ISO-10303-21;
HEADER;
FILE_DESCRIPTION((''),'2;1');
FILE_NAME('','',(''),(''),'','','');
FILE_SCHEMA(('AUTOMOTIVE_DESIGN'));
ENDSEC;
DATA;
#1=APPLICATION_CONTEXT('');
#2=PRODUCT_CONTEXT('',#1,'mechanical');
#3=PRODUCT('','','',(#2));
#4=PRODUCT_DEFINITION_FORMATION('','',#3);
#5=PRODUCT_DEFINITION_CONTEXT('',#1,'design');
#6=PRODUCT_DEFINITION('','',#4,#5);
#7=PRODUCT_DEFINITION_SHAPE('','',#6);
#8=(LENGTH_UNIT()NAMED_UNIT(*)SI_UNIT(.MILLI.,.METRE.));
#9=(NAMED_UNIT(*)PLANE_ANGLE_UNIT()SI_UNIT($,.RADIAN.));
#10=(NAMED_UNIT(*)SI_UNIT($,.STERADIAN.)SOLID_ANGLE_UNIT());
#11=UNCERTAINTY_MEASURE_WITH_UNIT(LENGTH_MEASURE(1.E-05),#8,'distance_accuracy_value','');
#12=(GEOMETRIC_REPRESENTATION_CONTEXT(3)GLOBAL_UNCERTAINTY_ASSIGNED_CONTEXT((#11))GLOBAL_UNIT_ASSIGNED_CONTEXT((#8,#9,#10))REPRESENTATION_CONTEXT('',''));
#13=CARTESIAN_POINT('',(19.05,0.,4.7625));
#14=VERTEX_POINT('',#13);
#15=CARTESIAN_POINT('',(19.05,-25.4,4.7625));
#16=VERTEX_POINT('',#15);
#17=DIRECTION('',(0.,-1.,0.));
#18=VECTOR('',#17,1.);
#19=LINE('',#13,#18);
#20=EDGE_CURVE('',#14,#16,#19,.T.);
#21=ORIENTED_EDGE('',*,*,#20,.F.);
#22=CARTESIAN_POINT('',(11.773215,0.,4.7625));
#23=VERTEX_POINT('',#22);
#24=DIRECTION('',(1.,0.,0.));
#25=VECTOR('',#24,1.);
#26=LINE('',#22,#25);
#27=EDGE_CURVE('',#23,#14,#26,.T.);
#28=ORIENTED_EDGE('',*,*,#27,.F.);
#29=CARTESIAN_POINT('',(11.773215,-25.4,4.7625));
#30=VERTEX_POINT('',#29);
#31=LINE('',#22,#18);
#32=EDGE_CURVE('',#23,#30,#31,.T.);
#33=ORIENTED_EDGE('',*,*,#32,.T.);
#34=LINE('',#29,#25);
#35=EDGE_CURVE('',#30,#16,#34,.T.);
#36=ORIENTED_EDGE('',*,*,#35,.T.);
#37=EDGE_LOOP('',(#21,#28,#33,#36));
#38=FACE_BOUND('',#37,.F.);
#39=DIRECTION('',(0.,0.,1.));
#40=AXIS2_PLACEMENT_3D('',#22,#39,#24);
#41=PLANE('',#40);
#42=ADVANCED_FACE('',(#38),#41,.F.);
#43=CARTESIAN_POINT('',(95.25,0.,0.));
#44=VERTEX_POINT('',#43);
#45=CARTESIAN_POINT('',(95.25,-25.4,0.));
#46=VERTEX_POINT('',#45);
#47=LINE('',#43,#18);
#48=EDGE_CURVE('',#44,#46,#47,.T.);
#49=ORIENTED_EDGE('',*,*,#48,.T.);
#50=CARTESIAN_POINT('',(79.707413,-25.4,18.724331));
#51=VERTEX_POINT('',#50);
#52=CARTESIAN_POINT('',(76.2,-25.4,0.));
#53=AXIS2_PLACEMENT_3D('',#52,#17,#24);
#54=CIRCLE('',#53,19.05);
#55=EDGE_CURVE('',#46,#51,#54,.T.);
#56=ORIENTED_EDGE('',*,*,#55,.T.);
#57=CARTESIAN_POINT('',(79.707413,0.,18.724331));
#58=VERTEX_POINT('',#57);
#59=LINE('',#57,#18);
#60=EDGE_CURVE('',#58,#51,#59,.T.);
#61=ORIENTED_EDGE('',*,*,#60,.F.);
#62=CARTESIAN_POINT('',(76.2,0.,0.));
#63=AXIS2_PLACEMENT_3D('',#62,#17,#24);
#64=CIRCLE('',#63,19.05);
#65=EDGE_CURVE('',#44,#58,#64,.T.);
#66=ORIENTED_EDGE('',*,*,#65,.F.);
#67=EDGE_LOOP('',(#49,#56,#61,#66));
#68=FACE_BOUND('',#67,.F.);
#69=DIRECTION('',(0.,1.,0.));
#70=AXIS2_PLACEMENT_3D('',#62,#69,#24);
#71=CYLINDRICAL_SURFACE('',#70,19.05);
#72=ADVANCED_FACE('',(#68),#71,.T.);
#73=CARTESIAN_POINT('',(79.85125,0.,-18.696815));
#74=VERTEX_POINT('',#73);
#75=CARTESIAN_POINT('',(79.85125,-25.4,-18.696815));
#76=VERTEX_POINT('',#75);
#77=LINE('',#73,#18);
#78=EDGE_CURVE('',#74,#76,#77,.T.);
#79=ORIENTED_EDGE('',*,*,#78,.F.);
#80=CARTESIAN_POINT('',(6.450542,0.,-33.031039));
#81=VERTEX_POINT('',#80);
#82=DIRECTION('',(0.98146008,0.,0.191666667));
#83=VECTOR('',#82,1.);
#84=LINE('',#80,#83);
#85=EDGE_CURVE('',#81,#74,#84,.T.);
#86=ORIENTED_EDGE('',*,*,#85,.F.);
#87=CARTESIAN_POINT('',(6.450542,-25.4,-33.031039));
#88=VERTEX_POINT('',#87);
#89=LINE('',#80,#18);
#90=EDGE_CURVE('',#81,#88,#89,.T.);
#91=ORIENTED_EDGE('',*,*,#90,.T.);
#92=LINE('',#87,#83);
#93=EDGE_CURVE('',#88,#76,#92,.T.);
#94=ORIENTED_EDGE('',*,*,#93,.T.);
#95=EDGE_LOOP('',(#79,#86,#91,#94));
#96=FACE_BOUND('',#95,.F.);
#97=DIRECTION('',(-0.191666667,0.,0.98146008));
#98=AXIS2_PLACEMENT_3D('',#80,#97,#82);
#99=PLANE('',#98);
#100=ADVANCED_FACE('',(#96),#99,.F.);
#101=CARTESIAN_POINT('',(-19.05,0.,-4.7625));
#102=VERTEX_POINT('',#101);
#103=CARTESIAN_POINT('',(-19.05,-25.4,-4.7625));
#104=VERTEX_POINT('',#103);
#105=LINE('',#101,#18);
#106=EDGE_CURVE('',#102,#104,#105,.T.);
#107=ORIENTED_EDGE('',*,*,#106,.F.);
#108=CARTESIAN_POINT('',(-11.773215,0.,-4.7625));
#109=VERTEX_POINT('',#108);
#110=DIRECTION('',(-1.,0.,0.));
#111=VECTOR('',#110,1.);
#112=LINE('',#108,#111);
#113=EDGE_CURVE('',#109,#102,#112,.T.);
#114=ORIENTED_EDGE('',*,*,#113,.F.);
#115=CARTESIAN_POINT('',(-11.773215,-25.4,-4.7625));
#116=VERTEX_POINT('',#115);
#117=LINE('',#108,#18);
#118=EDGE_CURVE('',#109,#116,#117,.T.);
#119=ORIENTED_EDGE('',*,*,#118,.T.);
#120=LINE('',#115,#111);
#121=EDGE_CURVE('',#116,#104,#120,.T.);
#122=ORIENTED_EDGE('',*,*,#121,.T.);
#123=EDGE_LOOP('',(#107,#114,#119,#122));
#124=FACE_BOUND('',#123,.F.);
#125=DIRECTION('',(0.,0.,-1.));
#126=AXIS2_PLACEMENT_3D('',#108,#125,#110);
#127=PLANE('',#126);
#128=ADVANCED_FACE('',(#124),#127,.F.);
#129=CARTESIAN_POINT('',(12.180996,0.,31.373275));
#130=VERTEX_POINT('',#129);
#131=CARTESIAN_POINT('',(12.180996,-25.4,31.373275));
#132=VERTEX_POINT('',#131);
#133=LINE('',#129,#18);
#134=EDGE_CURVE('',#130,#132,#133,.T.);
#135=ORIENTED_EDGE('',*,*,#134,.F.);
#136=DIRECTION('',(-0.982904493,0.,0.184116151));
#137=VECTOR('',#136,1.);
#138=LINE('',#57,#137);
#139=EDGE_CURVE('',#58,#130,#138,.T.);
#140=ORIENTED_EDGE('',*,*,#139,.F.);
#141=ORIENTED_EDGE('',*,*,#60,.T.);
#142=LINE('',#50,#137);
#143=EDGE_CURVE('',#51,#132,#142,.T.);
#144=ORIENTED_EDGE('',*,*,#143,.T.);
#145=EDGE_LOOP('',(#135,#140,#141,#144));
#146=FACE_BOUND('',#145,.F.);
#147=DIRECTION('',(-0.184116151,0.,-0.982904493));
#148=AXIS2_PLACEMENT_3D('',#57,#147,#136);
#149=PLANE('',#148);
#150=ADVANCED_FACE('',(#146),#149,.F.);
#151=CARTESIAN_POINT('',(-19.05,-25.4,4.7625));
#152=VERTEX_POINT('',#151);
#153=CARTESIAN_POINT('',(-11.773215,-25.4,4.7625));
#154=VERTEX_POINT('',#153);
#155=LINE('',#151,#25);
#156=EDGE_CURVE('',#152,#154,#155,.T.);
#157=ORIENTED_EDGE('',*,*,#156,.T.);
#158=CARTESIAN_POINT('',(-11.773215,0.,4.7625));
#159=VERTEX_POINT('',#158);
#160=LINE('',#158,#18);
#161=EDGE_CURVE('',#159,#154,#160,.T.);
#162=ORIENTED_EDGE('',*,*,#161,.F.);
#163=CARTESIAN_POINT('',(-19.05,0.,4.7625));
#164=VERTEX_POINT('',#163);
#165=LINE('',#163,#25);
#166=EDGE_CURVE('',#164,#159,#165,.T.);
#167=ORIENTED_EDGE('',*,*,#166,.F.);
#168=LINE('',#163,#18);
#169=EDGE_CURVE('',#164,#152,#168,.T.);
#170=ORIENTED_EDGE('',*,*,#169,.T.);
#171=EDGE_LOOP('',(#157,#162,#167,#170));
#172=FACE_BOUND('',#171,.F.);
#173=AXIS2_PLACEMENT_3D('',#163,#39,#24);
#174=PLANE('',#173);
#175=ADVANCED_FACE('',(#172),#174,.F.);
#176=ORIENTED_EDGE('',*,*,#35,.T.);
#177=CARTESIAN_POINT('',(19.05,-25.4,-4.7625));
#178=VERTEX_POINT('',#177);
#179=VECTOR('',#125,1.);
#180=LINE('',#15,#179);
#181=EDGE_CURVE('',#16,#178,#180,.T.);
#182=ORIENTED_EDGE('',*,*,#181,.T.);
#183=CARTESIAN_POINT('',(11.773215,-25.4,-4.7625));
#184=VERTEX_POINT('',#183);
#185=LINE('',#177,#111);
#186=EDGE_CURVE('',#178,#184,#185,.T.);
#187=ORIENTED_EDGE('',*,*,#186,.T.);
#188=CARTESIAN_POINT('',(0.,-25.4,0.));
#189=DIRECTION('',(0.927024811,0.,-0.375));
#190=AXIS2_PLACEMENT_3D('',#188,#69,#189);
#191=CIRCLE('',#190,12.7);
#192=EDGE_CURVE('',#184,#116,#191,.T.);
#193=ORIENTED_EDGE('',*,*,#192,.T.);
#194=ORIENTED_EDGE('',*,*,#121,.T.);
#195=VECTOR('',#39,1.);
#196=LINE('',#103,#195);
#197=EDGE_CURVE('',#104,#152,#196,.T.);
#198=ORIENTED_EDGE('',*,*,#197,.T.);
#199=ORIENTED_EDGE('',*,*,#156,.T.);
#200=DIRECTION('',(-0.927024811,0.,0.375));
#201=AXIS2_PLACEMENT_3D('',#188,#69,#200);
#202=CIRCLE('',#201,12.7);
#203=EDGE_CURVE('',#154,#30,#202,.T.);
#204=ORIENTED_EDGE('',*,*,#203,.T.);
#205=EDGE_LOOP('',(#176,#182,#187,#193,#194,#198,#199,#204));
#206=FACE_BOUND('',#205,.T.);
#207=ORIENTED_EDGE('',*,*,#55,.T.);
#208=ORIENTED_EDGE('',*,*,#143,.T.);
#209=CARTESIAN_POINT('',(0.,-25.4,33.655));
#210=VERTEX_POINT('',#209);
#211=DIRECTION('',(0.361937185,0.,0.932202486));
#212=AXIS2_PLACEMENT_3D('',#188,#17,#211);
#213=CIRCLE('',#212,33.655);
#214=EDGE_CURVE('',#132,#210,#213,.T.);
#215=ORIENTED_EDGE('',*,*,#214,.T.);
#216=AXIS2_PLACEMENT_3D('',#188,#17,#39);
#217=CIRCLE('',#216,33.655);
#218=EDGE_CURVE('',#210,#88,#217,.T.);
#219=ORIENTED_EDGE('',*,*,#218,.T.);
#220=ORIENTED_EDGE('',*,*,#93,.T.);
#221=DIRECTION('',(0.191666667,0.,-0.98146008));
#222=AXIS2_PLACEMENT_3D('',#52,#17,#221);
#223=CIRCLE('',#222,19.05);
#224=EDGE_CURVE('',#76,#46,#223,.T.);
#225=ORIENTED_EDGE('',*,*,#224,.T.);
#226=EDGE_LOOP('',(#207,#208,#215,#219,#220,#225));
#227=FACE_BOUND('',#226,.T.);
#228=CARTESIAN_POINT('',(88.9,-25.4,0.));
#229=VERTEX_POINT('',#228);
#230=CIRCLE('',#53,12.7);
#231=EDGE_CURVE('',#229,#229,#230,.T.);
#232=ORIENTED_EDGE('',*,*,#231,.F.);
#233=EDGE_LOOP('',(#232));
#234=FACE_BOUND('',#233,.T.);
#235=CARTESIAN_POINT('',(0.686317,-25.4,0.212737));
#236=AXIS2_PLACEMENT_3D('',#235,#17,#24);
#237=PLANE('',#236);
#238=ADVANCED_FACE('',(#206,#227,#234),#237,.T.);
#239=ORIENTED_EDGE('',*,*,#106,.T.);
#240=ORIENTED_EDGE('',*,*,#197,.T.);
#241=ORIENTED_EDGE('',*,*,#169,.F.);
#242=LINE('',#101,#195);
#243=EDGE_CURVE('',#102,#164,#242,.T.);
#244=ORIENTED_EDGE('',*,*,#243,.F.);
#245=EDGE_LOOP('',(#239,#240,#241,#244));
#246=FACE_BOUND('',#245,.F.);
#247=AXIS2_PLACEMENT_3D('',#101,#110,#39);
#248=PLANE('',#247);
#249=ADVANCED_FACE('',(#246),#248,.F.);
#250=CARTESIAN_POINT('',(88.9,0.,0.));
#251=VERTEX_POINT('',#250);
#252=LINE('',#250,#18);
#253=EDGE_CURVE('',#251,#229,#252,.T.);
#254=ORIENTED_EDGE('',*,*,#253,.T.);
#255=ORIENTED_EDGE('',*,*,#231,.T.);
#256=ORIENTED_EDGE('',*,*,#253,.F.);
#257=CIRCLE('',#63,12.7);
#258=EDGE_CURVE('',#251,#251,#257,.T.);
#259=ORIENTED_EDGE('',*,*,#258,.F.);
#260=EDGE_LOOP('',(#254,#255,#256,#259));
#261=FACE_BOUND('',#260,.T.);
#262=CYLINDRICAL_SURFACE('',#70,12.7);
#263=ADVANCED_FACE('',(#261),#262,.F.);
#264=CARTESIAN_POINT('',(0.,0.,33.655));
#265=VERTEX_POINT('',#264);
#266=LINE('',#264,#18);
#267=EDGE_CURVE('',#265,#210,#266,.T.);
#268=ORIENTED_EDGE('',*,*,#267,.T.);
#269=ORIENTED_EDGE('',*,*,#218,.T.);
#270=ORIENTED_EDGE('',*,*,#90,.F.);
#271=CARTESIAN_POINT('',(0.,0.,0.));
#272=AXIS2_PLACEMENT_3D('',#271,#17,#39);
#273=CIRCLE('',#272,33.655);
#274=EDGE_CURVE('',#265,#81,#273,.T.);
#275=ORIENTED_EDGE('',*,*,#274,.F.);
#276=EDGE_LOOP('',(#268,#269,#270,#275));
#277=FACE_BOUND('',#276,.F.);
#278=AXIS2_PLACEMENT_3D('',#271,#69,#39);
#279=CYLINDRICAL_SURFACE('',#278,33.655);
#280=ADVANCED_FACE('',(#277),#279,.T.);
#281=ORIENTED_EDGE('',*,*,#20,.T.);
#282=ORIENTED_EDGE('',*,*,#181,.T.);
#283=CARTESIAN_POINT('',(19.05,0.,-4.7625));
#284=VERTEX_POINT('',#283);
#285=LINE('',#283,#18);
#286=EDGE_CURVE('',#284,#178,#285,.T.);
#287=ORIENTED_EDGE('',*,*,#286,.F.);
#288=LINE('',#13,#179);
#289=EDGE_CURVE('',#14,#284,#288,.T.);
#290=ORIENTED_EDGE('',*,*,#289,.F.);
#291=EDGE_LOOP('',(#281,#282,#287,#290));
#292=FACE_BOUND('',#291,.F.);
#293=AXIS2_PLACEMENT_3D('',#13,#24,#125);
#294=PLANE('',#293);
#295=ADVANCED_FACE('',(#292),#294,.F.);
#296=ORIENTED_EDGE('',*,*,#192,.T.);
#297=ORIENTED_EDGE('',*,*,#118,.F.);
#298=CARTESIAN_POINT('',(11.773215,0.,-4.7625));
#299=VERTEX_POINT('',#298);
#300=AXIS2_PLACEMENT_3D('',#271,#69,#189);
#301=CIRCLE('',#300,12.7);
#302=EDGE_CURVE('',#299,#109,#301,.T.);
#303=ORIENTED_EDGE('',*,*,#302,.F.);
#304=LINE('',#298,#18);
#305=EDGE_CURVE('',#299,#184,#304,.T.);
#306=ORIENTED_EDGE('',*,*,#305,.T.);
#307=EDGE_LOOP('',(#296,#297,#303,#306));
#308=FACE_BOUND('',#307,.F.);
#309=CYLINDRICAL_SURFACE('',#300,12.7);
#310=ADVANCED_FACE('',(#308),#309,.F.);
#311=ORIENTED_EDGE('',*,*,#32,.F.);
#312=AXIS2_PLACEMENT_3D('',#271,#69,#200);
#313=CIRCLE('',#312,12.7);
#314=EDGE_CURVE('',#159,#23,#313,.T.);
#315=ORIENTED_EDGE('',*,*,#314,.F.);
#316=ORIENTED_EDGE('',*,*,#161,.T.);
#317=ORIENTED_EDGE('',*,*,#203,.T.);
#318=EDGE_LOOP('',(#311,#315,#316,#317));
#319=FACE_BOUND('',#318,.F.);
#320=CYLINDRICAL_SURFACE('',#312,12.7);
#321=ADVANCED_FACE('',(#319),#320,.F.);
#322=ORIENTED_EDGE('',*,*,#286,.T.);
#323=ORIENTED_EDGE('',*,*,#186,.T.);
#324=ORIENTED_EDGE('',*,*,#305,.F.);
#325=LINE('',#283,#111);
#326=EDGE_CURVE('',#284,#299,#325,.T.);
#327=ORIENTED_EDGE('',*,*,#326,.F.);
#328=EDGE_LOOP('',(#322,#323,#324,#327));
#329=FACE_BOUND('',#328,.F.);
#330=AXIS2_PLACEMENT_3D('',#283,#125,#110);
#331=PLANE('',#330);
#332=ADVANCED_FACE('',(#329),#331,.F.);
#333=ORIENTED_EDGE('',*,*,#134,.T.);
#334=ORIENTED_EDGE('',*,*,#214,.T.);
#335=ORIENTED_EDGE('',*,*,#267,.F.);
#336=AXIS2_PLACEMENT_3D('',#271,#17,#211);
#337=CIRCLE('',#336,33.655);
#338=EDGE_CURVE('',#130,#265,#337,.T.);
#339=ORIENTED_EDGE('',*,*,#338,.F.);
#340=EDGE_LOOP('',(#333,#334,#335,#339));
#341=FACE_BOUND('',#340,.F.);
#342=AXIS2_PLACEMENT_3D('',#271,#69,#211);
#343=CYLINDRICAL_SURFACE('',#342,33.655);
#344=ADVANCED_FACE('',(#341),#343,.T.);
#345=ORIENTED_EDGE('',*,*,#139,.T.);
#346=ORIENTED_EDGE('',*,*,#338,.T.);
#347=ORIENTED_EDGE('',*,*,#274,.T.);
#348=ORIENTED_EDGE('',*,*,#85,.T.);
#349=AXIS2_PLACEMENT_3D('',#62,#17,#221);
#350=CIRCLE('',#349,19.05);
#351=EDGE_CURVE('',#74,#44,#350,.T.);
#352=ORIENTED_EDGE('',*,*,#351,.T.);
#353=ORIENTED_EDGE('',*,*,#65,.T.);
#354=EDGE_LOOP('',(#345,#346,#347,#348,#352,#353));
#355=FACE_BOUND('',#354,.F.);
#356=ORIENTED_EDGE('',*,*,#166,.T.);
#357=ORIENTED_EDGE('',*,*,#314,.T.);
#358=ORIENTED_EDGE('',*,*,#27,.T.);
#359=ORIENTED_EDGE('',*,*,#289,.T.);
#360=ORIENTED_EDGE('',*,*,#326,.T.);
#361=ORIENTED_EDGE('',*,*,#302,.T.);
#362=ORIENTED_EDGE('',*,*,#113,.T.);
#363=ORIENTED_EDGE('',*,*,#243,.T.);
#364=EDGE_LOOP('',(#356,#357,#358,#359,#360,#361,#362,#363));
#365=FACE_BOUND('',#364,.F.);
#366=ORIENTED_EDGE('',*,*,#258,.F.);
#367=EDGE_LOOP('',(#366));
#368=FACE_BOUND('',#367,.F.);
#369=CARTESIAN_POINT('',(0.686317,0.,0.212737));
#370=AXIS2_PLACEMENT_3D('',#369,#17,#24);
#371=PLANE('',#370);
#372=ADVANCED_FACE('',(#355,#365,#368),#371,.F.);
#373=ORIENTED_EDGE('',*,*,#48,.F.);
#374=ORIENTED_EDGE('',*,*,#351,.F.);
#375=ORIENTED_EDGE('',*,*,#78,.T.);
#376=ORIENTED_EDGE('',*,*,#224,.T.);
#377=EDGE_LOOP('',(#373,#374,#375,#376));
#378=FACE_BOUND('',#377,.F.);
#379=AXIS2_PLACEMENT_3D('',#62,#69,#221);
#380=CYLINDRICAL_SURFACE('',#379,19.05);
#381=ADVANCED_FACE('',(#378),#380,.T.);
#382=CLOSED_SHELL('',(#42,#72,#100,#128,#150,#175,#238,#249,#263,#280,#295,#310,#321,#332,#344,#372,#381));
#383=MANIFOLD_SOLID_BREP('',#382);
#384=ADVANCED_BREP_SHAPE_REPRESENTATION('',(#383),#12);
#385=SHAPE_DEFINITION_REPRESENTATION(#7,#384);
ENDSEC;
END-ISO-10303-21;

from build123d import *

# Parameters (mm, degrees)
F1_DEPTH = 25.4
F0_R     = 12.7
F2_DEPTH = 25.4


# Not quite as in the source:
# - the program builds the solid bodies; features that only make, move or delete a surface that nothing else refers to are left out


with BuildPart() as f1:
    # F0 (on Front) → F1 (new body)
    with BuildSketch(Plane.XZ):
        with BuildLine():
            Line((12.1809959468, 31.3732746576), (0, 33.655))
            ThreePointArc((0, 33.655), (-33.498646558, -3.2403246414), (6.4505416667, -33.0310389968))
            ThreePointArc((6.4505416667, -33.0310389968), (25.9783756689, -21.3958646146), (33.655, 0))
            ThreePointArc((33.655, 0), (27.7723823572, 19.0093083305), (12.1809959468, 31.3732746576))
        make_face()
        with BuildLine():
            ThreePointArc((-11.7732150983, 4.7625), (0, 12.7), (11.7732150983, 4.7625))
            Line((11.7732150983, 4.7625), (19.05, 4.7625))
            Line((19.05, 4.7625), (19.05, -4.7625))
            Line((19.05, -4.7625), (11.7732150983, -4.7625))
            ThreePointArc((11.7732150983, -4.7625), (0, -12.7), (-11.7732150983, -4.7625))
            Line((-11.7732150983, -4.7625), (-19.05, -4.7625))
            Line((-19.05, -4.7625), (-19.05, 4.7625))
            Line((-19.05, 4.7625), (-11.7732150983, 4.7625))
        make_face(mode=Mode.SUBTRACT)
    extrude(amount=F1_DEPTH)

    # F0 (on Front) → F2 (join)
    with BuildSketch(Plane.XZ):
        with BuildLine():
            Line((12.1809959468, 31.3732746576), (0, 33.655))
            ThreePointArc((0, 33.655), (-33.498646558, -3.2403246414), (6.4505416667, -33.0310389968))
            ThreePointArc((6.4505416667, -33.0310389968), (25.9783756689, -21.3958646146), (33.655, 0))
            ThreePointArc((33.655, 0), (27.7723823572, 19.0093083305), (12.1809959468, 31.3732746576))
        make_face()
        with BuildLine():
            ThreePointArc((-11.7732150983, 4.7625), (0, 12.7), (11.7732150983, 4.7625))
            Line((11.7732150983, 4.7625), (19.05, 4.7625))
            Line((19.05, 4.7625), (19.05, -4.7625))
            Line((19.05, -4.7625), (11.7732150983, -4.7625))
            ThreePointArc((11.7732150983, -4.7625), (0, -12.7), (-11.7732150983, -4.7625))
            Line((-11.7732150983, -4.7625), (-19.05, -4.7625))
            Line((-19.05, -4.7625), (-19.05, 4.7625))
            Line((-19.05, 4.7625), (-11.7732150983, 4.7625))
        make_face(mode=Mode.SUBTRACT)
        with BuildLine():
            ThreePointArc((12.1809959468, 31.3732746576), (6.1964290683, 33.0796507207), (0, 33.655))
            Line((0, 33.655), (12.1809959468, 31.3732746576))
        make_face()
        with BuildLine():
            ThreePointArc((33.655, 0), (25.9783756689, -21.3958646146), (6.4505416667, -33.0310389968))
            Line((6.4505416667, -33.0310389968), (79.85125, -18.6968145265))
            ThreePointArc((79.85125, -18.6968145265), (57.1501407243, -0.0732227913), (79.7074126802, 18.7243305966))
            Line((79.7074126802, 18.7243305966), (12.1809959468, 31.3732746576))
            ThreePointArc((12.1809959468, 31.3732746576), (27.7723823572, 19.0093083305), (33.655, 0))
        make_face()
        with BuildLine():
            ThreePointArc((79.7074126802, 18.7243305966), (57.1501407243, -0.0732227913), (79.85125, -18.6968145265))
            ThreePointArc((79.85125, -18.6968145265), (90.9047409447, -12.110866763), (95.25, 0))
            ThreePointArc((95.25, 0), (90.8580815859, 12.167298148), (79.7074126802, 18.7243305966))
        make_face()
        with Locations((76.2, 0)):
            Circle(F0_R, mode=Mode.SUBTRACT)
    extrude(amount=F2_DEPTH)


solid = f1.part
